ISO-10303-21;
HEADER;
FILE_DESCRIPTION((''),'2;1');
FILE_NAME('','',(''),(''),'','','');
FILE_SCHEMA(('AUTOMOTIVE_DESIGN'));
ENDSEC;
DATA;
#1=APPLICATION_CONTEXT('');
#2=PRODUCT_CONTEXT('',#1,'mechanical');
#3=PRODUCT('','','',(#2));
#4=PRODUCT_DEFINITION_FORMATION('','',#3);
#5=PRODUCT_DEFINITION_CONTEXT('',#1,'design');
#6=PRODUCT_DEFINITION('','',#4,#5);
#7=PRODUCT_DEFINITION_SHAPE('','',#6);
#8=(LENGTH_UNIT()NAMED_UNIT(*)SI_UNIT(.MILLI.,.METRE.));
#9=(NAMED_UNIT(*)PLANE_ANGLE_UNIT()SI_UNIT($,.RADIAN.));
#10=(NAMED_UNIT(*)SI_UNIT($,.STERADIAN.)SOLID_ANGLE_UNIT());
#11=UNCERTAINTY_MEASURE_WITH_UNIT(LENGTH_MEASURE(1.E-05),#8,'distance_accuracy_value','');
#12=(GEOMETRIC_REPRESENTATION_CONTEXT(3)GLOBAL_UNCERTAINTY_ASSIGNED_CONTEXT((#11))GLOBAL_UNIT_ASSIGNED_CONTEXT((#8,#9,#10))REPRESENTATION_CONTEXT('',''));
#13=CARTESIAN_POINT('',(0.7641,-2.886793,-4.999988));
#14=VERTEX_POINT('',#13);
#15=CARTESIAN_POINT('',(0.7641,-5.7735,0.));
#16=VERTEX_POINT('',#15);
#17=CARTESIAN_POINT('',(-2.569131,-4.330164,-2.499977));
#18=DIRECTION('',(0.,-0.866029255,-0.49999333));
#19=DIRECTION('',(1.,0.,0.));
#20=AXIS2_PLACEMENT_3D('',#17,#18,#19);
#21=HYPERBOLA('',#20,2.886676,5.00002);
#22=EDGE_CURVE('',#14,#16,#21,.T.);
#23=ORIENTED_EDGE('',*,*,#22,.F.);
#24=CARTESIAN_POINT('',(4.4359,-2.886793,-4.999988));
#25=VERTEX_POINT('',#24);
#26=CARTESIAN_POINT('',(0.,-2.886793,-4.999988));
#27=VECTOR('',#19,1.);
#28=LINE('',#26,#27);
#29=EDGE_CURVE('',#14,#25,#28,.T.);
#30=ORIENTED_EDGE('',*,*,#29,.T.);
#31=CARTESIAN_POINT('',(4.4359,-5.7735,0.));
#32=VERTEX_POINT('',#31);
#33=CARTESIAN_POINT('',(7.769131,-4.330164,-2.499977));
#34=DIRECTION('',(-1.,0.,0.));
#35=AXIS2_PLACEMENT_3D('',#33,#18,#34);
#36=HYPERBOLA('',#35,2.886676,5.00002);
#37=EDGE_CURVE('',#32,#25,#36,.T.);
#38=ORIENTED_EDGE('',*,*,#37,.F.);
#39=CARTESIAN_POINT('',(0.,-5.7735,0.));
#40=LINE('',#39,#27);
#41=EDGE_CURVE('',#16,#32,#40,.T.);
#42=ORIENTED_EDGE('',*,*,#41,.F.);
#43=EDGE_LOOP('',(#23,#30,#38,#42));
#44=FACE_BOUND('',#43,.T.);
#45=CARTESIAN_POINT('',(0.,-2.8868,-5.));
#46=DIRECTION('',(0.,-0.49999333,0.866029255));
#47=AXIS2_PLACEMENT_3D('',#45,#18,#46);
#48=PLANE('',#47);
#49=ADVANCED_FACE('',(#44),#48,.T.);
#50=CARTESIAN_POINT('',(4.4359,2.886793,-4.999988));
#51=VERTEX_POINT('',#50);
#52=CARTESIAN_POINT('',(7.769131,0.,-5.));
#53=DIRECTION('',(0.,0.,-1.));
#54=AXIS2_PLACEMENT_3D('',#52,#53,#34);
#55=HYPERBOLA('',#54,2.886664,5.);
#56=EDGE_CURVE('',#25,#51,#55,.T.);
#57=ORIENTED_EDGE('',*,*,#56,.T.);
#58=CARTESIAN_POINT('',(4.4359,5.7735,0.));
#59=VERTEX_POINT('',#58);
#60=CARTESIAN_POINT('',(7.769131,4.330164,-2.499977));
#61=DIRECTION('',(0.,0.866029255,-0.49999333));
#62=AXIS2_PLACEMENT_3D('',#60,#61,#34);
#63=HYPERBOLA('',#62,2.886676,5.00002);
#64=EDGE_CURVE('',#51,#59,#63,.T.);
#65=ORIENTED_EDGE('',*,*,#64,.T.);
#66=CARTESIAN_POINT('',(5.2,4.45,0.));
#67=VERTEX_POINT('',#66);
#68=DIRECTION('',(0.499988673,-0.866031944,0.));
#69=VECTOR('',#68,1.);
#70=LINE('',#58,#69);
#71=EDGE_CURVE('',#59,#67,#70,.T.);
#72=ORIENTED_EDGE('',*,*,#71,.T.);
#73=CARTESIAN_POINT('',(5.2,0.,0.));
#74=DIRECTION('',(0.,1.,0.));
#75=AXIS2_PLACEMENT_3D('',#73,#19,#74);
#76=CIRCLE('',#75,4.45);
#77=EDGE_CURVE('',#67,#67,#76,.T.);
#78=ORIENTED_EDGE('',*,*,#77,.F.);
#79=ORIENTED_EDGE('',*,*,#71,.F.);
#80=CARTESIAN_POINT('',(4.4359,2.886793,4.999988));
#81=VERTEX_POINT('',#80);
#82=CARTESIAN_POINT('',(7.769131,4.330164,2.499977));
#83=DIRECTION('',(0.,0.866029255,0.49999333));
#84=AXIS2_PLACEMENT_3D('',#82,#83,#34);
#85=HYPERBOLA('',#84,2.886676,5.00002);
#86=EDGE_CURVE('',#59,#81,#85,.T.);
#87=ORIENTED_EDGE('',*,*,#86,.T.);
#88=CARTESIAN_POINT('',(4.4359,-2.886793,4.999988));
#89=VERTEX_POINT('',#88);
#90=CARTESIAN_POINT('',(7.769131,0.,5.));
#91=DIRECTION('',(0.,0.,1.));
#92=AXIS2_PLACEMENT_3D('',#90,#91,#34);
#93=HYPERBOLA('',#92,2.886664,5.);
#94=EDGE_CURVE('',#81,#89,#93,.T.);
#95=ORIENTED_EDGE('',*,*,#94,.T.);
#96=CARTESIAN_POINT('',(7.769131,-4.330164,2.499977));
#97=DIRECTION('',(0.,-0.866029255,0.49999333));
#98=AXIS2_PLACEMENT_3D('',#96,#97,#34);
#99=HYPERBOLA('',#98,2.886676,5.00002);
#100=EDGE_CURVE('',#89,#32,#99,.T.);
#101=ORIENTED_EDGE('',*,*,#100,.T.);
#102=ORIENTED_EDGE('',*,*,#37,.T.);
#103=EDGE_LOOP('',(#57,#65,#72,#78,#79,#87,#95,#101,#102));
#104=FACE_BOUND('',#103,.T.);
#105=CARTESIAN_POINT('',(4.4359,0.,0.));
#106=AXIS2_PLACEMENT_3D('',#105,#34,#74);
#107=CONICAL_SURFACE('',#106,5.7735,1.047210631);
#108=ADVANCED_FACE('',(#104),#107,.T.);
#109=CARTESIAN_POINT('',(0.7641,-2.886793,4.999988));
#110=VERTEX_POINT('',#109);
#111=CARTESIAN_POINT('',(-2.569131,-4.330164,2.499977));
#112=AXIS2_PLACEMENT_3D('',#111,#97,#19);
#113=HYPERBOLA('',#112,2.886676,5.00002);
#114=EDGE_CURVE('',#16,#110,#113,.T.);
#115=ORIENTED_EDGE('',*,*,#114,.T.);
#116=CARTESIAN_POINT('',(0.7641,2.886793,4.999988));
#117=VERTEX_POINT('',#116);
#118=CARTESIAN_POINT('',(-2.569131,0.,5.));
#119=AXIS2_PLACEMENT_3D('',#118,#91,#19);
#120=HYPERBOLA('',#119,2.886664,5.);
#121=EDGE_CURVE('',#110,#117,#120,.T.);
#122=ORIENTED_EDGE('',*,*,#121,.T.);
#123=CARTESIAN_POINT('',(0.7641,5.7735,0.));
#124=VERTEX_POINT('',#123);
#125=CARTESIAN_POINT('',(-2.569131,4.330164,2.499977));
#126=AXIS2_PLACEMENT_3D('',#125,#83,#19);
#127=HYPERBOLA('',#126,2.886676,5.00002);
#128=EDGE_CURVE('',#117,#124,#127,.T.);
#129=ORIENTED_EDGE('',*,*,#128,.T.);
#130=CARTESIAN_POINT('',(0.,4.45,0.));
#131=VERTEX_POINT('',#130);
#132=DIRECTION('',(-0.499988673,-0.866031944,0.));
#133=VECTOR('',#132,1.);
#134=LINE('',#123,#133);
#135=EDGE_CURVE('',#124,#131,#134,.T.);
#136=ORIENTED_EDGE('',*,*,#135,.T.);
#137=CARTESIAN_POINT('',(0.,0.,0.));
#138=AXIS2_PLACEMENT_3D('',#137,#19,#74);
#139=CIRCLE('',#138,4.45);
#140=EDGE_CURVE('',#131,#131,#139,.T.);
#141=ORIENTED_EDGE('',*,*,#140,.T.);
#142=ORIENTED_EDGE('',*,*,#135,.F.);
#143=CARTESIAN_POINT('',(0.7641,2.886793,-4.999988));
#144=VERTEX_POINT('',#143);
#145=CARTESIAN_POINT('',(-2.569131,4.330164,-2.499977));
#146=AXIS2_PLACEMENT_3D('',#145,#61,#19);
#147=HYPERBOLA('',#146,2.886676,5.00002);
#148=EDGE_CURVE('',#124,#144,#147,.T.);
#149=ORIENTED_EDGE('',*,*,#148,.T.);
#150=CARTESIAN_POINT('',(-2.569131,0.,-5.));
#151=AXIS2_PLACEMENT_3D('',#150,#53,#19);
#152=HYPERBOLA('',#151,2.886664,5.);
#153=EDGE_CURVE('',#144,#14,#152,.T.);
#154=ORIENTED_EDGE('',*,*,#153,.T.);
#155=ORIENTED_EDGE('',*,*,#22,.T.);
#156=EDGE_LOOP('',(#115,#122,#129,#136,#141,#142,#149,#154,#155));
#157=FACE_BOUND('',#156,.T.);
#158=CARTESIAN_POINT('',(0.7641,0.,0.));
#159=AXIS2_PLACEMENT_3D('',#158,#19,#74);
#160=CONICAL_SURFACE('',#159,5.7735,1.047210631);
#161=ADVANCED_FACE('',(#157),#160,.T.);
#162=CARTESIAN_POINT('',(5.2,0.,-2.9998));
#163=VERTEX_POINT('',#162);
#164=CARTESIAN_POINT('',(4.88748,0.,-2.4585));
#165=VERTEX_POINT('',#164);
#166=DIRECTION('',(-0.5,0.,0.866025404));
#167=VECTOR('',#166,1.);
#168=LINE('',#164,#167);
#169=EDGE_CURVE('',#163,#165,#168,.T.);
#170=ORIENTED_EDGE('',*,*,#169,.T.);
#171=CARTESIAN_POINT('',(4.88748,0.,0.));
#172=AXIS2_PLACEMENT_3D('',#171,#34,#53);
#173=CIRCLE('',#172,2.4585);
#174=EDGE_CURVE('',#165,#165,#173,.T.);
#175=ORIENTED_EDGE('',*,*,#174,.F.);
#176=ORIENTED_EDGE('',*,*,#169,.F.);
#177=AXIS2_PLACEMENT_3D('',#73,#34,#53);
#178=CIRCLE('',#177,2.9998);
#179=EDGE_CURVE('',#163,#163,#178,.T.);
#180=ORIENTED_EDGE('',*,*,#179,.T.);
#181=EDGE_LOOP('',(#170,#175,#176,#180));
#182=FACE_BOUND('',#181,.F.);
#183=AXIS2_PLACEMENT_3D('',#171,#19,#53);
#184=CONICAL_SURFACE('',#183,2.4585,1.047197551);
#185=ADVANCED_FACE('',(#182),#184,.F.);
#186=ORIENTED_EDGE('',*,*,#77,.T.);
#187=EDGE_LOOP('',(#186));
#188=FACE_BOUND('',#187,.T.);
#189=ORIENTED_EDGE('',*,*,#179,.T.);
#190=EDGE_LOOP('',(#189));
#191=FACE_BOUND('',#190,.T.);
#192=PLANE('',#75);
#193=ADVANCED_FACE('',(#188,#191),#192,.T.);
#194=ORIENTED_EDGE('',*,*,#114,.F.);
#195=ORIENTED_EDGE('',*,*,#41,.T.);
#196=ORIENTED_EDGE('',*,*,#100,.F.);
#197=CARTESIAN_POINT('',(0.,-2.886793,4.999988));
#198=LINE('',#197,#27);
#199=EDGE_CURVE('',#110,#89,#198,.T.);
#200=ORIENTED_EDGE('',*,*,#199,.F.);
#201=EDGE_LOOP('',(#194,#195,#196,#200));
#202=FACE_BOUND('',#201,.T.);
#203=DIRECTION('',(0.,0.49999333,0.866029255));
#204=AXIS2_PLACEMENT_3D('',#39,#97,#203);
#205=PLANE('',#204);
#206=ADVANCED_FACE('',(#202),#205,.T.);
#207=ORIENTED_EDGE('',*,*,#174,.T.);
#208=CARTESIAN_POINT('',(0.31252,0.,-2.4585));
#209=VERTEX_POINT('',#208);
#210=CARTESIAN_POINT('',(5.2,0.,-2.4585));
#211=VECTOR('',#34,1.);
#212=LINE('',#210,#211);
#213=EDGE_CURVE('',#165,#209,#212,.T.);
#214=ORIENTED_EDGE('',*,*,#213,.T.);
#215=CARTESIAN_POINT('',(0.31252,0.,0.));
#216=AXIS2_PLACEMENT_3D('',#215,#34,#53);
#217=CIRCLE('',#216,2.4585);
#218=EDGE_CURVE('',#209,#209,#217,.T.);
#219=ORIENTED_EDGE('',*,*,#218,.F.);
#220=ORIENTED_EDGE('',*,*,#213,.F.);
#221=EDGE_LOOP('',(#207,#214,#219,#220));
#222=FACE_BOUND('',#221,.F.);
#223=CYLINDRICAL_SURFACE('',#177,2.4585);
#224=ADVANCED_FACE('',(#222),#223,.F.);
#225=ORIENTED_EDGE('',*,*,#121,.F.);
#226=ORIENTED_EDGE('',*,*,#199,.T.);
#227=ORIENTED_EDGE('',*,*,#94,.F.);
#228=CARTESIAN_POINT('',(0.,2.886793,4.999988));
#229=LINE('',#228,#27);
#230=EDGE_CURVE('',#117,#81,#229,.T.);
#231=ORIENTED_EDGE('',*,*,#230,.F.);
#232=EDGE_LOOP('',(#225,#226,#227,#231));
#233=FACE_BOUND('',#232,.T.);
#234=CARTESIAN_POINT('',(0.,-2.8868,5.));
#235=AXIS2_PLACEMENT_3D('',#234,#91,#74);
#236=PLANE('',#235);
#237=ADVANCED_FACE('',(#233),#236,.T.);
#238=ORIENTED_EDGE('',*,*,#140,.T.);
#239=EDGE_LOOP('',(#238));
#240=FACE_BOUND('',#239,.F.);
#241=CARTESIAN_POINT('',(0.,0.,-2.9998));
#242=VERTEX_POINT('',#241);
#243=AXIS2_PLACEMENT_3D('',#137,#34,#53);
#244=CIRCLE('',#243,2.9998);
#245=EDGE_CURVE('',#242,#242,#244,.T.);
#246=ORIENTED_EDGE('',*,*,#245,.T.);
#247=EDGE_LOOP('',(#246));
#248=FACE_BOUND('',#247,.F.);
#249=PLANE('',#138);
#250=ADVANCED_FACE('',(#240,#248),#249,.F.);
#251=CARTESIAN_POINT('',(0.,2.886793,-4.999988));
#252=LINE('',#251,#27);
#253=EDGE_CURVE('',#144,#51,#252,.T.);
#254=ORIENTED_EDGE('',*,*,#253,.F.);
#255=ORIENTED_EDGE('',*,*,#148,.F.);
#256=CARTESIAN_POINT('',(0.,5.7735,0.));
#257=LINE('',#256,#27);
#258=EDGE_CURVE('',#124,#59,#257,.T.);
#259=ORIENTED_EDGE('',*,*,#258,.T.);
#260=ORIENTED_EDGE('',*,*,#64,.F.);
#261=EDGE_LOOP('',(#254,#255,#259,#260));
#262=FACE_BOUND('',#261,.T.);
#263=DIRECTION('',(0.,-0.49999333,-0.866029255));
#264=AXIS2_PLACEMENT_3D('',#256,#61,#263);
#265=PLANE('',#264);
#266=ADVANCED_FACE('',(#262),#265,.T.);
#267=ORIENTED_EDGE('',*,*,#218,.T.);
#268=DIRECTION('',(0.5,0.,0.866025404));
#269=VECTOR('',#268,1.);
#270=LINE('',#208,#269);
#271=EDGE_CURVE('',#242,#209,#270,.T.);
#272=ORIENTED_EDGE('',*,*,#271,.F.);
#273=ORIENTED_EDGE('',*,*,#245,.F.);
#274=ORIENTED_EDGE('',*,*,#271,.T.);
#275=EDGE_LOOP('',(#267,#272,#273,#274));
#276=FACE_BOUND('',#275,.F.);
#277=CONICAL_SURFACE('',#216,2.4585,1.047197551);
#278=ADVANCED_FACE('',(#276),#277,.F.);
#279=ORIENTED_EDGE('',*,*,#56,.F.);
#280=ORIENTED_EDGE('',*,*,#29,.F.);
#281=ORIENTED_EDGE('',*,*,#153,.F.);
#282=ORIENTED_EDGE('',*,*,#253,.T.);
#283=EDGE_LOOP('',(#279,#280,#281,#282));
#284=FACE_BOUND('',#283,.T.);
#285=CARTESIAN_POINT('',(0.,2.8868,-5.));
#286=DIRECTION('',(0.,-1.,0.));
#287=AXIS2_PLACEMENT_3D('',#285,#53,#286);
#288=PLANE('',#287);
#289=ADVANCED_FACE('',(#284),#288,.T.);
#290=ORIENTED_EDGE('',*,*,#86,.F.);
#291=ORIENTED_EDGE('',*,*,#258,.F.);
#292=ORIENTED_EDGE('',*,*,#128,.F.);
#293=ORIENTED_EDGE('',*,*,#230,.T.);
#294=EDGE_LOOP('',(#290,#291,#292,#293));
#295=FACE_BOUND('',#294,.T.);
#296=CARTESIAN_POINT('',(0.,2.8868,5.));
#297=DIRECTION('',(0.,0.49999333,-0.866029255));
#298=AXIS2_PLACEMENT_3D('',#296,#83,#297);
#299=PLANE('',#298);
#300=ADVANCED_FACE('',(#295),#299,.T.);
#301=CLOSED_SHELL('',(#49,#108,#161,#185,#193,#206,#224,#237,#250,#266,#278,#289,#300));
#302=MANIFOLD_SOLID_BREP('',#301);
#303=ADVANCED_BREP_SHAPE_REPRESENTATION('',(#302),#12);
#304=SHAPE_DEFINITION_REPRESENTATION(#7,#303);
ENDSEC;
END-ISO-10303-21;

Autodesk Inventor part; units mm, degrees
ref_plane "YZ Plane" through (0, 0, 0) normal (1, 0, 0) x (0, 1, 0)
ref_plane "XZ Plane" through (0, 0, 0) normal (0, 1, 0) x (-1, 0, 0)
sketch "Szkic1" plane through (0, 0, 0) normal (1, 0, 0) x (0, 1, 0)
  line L0 (-5.7735, 0) -> (-2.8868, 5)
  line L1 (-2.8868, 5) -> (2.8868, 5)
  line L2 (2.8868, 5) -> (5.7735, 0)
  line L3 (5.7735, 0) -> (2.8868, -5)
  line L4 (2.8868, -5) -> (-2.8868, -5)
  line L5 (-2.8868, -5) -> (-5.7735, 0)
  point P0 (0, 0)
  point P1 (0, 0)
  dimension "d0" = 11.547
extrude "Bryła" add sketch "Szkic1" along normal blind 5.2
sketch "Szkic2" plane through (0, 0, 0) normal (0, 0, 1) x (1, 0, 0)
  line L0 (0, 2.8868) -> (0, 5.7735) projected
  line L1 (0, 5.7735) -> (5.2, 5.7735) projected
  line L2 (5.2, 2.8868) -> (5.2, 5.7735) projected
  line L3 (-1.04, 0) -> (6.24, 0) projected
  line L4 (0.7641, 5.7735) -> (0, 4.45)
  line L5 (4.4359, 5.7735) -> (5.2, 4.45)
  dimension "d3" = 30
  dimension "d4" = 30
  dimension "d5" = 8.9
  dimension "d6" = 8.9
revolve "Faza1" cut sketch "Szkic2" angle 360 about axis through (-10, 0, 0) along (1, 0, 0)
sketch "Szkic3" plane through (5.2, 0, 0) normal (1, 0, 0) x (0, 0, -1)
  arc A0 (-0.625, -1.0825) -> (0.625, -1.0825) centre (0, 0) ccw projected
hole "Gwint" at (5.2, 0, 0) direction (-1, 0, 0) diameter 4.917 end through all thread size "M6x1" class "6H" standard "ISO Metric profile"
chamfer "Faza2" distance 0.5413 angle 30 1 edges at (5.2, 0, 2.4585) measured on face at (5.2, 3.7371, -0.4538)
chamfer "Faza3" distance 0.5413 angle 30 1 edges at (0, 0, 2.4585) measured on face at (0, 3.7371, -0.4538)
ref_plane "Work Plane1" through (-10.9812, 0, 0) normal (0, -0.8660254, -0.5) x (1, 0, 0)
equation "\"d0\" = 1.1547 * SW"
equation "\"d1\" = KOH"
equation "\"d3\" = ANG1"
equation "\"d4\" = ANG2"
equation "\"d5\" = SW0"
equation "\"d6\" = SW01"
equation "\"d8\" = -0.5 * GD1 + 0.5 * NND"
equation "\"d40\" = -0.5 * GD1 + 0.5 * NND"
equation "\"d10\" = -0.5 * GD1 + 0.5 * NND"
equation "\"d41\" = -0.5 * GD1 + 0.5 * NND"
equation "\"ANG1\" = 30deg"
equation "\"ANG2\" = 30deg"
equation "\"NND\" = 6"
equation "\"KOH\" = 5.2"
equation "\"SW0\" = 8.9"
equation "\"SW01\" = 8.9"
equation "\"GUL\" = 0.541266 * PTC"
equation "\"THREADDIA\" = 6"
equation "\"TOA\" = 30deg"
equation "\"PTC\" = 1"
equation "\"E0\" = 1.155 * SW"
equation "\"GAL\" = 0.541266 * PTC"
equation "\"SW\" = 10"
equation "\"GD1\" = 4.917468"
properties part number "ISO 4032 - M6" material "Stal nierdzewna 440C"
